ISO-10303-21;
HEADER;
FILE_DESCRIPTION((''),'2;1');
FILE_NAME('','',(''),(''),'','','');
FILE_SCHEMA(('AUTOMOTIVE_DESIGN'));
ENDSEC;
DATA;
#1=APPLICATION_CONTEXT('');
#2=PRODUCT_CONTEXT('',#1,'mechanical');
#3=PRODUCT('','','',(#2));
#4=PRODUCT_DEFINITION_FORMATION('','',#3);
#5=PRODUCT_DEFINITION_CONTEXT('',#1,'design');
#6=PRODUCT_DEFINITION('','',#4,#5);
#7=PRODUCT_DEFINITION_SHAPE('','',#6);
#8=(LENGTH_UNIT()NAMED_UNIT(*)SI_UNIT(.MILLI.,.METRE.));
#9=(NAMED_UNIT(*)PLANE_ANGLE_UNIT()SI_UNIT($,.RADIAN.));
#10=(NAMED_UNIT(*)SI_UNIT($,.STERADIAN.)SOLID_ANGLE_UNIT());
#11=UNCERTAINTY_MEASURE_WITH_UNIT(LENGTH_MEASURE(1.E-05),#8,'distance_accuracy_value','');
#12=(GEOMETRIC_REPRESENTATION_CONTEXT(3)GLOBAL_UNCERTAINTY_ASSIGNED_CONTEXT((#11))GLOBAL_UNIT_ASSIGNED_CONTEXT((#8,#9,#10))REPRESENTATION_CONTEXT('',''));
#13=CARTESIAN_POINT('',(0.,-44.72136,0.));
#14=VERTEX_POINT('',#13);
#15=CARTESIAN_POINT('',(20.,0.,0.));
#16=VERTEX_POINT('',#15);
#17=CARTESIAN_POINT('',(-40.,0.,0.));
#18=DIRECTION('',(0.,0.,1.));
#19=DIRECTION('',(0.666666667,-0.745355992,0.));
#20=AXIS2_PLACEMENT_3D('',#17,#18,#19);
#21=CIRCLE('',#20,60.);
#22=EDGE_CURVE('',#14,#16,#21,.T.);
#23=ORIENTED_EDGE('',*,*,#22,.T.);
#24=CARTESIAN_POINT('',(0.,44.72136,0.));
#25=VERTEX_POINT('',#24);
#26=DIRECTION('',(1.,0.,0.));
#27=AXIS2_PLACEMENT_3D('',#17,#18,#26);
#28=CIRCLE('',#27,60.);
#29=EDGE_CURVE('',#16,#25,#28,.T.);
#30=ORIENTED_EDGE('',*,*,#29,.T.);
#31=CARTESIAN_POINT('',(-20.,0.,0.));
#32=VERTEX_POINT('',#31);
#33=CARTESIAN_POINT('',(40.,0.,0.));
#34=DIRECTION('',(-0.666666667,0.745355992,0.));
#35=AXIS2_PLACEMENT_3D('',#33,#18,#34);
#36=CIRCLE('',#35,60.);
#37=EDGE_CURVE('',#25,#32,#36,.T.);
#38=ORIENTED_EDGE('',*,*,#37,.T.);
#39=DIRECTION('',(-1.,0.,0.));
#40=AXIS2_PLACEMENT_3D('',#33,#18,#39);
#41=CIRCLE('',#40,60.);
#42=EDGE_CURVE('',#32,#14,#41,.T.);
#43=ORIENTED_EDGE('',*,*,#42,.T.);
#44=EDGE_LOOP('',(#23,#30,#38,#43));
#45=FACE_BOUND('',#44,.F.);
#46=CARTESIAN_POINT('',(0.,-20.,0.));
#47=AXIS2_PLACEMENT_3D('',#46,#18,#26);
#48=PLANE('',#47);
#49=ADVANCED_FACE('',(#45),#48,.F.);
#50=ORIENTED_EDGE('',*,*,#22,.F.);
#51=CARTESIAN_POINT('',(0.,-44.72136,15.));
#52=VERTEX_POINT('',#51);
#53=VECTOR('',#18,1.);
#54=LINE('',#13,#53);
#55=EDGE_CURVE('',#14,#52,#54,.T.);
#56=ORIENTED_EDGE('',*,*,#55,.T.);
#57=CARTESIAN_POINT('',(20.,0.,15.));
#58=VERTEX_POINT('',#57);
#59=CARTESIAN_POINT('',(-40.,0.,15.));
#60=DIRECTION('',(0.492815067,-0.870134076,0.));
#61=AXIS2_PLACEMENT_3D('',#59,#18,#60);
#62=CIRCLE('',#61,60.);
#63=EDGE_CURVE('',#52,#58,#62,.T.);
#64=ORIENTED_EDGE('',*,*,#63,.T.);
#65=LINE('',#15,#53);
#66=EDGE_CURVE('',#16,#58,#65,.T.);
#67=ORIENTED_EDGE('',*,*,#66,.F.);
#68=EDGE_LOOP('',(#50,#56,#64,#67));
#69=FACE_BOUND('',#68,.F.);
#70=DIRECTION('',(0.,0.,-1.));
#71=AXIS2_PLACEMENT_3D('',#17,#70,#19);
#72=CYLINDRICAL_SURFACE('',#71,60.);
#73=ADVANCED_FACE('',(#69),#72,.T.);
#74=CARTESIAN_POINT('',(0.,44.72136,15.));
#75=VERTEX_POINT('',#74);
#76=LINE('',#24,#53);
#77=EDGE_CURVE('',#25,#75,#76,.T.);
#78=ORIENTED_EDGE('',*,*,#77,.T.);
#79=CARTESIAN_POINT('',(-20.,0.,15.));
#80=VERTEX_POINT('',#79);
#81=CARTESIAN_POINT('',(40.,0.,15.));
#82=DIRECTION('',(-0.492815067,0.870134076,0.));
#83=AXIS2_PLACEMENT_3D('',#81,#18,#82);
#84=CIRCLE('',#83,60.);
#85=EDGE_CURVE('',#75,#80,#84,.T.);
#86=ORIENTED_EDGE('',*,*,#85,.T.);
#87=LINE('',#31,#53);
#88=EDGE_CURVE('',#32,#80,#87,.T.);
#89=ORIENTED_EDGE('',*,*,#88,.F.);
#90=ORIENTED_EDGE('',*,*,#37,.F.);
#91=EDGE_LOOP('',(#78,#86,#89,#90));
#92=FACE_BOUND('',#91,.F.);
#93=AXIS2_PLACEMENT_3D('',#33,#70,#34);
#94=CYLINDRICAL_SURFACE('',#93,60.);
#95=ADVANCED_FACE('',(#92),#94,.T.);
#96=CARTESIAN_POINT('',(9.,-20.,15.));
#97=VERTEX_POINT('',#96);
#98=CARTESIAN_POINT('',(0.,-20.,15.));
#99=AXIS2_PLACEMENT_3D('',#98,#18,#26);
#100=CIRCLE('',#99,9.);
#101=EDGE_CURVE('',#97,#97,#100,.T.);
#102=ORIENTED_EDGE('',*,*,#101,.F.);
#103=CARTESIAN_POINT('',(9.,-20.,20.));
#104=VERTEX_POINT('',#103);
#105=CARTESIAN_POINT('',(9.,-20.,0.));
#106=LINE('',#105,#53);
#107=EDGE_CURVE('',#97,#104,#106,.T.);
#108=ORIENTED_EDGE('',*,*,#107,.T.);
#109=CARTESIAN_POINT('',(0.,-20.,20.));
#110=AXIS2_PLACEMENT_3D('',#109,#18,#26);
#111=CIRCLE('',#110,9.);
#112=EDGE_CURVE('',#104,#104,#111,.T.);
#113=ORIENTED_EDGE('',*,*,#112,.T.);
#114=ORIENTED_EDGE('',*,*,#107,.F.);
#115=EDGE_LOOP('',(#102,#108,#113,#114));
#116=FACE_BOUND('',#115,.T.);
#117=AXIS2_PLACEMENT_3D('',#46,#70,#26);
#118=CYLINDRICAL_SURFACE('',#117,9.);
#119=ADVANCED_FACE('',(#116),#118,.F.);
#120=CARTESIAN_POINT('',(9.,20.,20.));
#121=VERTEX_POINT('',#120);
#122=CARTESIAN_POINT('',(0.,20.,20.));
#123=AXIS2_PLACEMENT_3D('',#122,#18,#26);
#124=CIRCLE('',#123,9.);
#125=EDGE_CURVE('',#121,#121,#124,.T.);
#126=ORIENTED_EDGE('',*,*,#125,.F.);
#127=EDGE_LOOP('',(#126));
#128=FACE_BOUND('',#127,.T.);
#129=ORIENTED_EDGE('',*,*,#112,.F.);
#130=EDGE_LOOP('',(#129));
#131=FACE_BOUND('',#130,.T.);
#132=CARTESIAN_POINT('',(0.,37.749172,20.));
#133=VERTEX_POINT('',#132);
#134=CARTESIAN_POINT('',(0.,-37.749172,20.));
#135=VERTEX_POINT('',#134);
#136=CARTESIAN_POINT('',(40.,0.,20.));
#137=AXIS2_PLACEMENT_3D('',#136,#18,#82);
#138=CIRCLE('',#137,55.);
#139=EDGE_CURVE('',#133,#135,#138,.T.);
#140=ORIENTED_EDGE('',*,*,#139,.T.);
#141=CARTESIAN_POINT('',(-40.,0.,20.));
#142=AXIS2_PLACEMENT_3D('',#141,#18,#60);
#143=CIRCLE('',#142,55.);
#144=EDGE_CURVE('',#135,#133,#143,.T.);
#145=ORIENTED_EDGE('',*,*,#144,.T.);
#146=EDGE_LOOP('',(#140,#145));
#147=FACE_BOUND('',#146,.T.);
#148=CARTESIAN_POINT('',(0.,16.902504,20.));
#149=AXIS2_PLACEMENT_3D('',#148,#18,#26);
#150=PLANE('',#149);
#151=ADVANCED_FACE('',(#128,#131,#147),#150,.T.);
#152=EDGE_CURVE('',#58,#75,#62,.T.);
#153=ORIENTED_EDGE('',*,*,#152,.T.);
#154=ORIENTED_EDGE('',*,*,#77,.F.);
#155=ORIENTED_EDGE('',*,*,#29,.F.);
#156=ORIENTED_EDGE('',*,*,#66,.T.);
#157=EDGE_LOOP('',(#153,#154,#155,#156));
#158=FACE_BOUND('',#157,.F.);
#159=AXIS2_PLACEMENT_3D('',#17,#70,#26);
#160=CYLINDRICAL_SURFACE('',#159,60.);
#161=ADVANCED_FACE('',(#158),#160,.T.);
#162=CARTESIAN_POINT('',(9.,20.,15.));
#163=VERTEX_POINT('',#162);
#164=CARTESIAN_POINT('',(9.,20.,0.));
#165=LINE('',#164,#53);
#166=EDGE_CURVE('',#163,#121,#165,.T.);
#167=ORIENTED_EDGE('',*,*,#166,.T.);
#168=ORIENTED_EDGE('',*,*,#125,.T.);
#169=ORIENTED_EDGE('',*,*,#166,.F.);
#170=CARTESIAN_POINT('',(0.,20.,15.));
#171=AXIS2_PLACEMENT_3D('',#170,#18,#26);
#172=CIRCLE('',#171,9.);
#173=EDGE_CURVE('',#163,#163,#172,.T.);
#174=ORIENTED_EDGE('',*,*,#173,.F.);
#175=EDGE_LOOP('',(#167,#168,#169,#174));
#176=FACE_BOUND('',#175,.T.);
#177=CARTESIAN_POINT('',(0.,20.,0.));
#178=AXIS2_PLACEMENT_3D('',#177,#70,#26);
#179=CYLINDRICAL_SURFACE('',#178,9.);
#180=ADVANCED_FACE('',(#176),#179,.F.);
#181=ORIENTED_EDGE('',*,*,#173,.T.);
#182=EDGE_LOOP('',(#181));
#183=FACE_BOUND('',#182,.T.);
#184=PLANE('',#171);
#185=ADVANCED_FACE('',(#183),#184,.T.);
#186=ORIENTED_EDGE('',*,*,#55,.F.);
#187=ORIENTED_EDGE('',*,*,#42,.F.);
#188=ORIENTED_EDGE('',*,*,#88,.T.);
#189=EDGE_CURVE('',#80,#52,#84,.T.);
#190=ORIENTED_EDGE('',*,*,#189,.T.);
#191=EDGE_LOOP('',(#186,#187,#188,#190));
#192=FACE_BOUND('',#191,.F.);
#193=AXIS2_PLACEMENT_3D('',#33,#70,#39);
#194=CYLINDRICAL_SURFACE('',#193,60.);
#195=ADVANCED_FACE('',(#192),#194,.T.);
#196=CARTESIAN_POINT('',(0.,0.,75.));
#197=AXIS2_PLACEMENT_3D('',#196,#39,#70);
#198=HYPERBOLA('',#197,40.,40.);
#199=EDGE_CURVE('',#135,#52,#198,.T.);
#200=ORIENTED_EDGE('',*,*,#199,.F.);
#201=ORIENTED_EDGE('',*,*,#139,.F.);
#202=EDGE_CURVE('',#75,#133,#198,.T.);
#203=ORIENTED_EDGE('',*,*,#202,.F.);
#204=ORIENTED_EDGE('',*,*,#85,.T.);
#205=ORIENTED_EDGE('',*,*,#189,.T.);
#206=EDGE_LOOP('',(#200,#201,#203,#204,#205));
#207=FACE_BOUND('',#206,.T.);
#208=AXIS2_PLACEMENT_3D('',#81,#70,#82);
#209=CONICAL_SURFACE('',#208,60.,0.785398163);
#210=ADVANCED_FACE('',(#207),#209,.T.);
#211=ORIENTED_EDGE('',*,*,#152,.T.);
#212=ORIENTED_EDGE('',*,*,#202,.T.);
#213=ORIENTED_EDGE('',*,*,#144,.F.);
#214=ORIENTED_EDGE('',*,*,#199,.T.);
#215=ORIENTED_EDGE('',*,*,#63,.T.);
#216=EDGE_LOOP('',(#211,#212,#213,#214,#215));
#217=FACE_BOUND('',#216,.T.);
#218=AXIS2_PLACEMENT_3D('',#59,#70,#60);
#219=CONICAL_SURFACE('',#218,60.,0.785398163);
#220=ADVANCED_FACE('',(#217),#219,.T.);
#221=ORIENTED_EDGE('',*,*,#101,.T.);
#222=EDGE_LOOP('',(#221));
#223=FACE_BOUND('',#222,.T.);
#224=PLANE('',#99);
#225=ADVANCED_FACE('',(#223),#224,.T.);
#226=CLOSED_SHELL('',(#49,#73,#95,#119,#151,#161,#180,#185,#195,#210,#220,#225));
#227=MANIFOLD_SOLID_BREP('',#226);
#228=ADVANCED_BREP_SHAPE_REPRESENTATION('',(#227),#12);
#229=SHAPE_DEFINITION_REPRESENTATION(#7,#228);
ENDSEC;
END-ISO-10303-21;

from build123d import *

# Parameters (mm, degrees)
F0_R        = 9
F1_DEPTH    = 20
F2_DEPTH    = 15
F3_T2_ANGLE = 120.9484473771
F3_T4_ANGLE = 120.9484473771


# Not quite as in the source:
# - a fillet or chamfer that OpenCascade refuses, or shapes differently, is made with other operations: its cross-section is extruded or revolved along the edge and cut away or added


with BuildPart() as f1:
    # F0 (on Top) → F1 (new body)
    with BuildSketch(Plane.XY):
        with BuildLine():
            Line((-20, 0), (0, 0))
            Line((0, 0), (20, 0))
            ThreePointArc((20, 0), (14.7722557505, 24.4948974278), (0, 44.72135955))
            ThreePointArc((0, 44.72135955), (-14.7722557505, 24.4948974278), (-20, 0))
        make_face()
        with Locations((0, 20)):
            Circle(F0_R, mode=Mode.SUBTRACT)
        with BuildLine():
            Line((20, 0), (0, 0))
            Line((0, 0), (-20, 0))
            ThreePointArc((-20, 0), (-14.7722557505, -24.4948974278), (0, -44.72135955))
            ThreePointArc((0, -44.72135955), (14.7722557505, -24.4948974278), (20, 0))
        make_face()
        with Locations((0, -20)):
            Circle(F0_R, mode=Mode.SUBTRACT)
    extrude(amount=F1_DEPTH)

    # F0 (on Top) → F2 (join)
    with BuildSketch(Plane.XY):
        with Locations((0, -20)):
            Circle(F0_R)
        with Locations((0, 20)):
            Circle(F0_R)
    extrude(amount=F2_DEPTH)

    # F3: chamfer of 5 on 2 edges, made by hand

    # F3_s1 → F3_t2 (revolve, cut)
    with BuildSketch(Plane(origin=(-30.2853323821, -17.1526073175, 0), x_dir=(0, 0, 1), z_dir=(-0.8701340756, -0.4928150672, 0))):
        Polygon((15, -40.2873973125), (20, -35.2873973125), (20, -40.2873973125), align=None)
    revolve(axis=Axis((-40, 0, 20), (0, 0, 1)), revolution_arc=F3_T2_ANGLE, mode=Mode.SUBTRACT)

    # F3_s3 → F3_t4 (revolve, cut)
    with BuildSketch(Plane(origin=(30.2853323821, 17.1526073175, 0), x_dir=(0, 0, 1), z_dir=(0.8701340756, 0.4928150672, 0))):
        Polygon((15, -40.2873973125), (20, -35.2873973125), (20, -40.2873973125), align=None)
    revolve(axis=Axis((40, 0, 20), (0, 0, 1)), revolution_arc=F3_T4_ANGLE, mode=Mode.SUBTRACT)


solid = f1.part
